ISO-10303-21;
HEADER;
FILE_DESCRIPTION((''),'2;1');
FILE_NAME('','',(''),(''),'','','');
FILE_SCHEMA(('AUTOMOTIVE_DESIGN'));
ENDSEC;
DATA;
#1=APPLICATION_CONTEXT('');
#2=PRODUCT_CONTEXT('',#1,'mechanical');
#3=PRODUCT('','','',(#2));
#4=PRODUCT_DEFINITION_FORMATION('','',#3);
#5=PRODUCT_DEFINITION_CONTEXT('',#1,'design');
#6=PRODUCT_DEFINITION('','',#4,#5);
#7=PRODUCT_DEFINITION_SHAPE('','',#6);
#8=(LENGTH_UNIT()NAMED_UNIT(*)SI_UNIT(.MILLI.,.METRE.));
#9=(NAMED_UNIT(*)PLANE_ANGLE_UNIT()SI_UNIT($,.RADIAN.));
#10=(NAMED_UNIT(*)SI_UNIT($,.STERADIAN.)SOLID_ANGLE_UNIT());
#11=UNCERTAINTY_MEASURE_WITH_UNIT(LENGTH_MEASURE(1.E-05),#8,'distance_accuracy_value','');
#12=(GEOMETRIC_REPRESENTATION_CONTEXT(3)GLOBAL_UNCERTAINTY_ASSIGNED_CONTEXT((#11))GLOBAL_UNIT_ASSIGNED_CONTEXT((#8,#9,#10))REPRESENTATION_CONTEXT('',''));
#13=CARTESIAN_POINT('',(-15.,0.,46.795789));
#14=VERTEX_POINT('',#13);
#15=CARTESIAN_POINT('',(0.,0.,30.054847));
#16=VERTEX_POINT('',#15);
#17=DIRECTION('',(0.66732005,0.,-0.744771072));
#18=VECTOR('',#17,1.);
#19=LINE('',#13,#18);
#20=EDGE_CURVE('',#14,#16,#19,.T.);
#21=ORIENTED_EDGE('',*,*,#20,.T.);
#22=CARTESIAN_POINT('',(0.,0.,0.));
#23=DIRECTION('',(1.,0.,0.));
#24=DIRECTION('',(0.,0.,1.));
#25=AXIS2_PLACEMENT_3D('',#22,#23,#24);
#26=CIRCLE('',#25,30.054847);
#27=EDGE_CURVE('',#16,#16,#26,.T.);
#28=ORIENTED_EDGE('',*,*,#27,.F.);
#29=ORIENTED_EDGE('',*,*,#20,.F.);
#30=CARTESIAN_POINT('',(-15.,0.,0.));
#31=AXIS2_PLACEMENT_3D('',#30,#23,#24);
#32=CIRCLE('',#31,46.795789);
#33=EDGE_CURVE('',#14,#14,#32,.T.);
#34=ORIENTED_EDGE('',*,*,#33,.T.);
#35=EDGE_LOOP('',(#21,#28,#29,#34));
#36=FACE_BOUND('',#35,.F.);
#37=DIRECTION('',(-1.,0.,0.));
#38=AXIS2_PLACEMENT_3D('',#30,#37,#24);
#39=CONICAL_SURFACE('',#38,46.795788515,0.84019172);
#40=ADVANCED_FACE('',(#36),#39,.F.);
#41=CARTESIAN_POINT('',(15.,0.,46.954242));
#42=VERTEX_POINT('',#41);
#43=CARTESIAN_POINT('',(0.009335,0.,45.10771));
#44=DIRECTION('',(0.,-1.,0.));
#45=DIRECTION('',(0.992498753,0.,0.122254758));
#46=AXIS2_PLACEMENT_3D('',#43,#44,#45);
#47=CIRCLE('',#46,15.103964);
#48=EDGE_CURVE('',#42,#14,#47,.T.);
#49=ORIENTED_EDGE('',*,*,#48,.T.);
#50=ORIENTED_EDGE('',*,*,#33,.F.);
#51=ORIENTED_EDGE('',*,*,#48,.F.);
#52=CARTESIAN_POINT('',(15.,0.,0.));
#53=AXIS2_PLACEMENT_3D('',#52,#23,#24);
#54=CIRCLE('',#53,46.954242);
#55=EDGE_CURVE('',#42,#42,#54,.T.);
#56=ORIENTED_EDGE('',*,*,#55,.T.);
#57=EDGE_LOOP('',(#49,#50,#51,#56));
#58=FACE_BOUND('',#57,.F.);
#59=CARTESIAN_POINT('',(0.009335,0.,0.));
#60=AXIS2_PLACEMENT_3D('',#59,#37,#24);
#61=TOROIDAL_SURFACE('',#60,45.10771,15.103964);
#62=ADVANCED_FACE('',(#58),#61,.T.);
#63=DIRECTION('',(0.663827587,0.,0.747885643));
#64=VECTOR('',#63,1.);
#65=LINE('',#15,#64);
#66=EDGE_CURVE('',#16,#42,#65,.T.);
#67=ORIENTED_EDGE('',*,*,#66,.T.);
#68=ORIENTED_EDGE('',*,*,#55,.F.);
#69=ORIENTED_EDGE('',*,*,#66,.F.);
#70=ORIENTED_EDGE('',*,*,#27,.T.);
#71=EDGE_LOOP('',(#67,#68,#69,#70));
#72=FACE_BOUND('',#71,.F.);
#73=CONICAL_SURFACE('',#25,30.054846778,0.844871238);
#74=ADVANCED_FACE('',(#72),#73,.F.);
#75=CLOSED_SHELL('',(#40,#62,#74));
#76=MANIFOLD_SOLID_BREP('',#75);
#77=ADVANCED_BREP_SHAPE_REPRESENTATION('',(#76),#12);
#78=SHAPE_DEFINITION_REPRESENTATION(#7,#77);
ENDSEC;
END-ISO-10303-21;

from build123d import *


# Not quite as in the source:
# - the program builds the solid bodies; features that only make, move or delete a surface that nothing else refers to are left out


with BuildPart() as f2:
    # F0 (on Front) → F2 (revolve)
    with BuildSketch(Plane.XZ):
        with BuildLine():
            ThreePointArc((15, 46.954241825), (-0.0704401471, 60.2114637334), (-15, 46.7957885154))
            Line((-15, 46.7957885154), (0, 30.0548467785))
            Line((0, 30.0548467785), (15, 46.954241825))
        make_face()
    revolve(axis=Axis((7.8298e-06, 0, 0), (1, 0, 0)))


solid = f2.part
